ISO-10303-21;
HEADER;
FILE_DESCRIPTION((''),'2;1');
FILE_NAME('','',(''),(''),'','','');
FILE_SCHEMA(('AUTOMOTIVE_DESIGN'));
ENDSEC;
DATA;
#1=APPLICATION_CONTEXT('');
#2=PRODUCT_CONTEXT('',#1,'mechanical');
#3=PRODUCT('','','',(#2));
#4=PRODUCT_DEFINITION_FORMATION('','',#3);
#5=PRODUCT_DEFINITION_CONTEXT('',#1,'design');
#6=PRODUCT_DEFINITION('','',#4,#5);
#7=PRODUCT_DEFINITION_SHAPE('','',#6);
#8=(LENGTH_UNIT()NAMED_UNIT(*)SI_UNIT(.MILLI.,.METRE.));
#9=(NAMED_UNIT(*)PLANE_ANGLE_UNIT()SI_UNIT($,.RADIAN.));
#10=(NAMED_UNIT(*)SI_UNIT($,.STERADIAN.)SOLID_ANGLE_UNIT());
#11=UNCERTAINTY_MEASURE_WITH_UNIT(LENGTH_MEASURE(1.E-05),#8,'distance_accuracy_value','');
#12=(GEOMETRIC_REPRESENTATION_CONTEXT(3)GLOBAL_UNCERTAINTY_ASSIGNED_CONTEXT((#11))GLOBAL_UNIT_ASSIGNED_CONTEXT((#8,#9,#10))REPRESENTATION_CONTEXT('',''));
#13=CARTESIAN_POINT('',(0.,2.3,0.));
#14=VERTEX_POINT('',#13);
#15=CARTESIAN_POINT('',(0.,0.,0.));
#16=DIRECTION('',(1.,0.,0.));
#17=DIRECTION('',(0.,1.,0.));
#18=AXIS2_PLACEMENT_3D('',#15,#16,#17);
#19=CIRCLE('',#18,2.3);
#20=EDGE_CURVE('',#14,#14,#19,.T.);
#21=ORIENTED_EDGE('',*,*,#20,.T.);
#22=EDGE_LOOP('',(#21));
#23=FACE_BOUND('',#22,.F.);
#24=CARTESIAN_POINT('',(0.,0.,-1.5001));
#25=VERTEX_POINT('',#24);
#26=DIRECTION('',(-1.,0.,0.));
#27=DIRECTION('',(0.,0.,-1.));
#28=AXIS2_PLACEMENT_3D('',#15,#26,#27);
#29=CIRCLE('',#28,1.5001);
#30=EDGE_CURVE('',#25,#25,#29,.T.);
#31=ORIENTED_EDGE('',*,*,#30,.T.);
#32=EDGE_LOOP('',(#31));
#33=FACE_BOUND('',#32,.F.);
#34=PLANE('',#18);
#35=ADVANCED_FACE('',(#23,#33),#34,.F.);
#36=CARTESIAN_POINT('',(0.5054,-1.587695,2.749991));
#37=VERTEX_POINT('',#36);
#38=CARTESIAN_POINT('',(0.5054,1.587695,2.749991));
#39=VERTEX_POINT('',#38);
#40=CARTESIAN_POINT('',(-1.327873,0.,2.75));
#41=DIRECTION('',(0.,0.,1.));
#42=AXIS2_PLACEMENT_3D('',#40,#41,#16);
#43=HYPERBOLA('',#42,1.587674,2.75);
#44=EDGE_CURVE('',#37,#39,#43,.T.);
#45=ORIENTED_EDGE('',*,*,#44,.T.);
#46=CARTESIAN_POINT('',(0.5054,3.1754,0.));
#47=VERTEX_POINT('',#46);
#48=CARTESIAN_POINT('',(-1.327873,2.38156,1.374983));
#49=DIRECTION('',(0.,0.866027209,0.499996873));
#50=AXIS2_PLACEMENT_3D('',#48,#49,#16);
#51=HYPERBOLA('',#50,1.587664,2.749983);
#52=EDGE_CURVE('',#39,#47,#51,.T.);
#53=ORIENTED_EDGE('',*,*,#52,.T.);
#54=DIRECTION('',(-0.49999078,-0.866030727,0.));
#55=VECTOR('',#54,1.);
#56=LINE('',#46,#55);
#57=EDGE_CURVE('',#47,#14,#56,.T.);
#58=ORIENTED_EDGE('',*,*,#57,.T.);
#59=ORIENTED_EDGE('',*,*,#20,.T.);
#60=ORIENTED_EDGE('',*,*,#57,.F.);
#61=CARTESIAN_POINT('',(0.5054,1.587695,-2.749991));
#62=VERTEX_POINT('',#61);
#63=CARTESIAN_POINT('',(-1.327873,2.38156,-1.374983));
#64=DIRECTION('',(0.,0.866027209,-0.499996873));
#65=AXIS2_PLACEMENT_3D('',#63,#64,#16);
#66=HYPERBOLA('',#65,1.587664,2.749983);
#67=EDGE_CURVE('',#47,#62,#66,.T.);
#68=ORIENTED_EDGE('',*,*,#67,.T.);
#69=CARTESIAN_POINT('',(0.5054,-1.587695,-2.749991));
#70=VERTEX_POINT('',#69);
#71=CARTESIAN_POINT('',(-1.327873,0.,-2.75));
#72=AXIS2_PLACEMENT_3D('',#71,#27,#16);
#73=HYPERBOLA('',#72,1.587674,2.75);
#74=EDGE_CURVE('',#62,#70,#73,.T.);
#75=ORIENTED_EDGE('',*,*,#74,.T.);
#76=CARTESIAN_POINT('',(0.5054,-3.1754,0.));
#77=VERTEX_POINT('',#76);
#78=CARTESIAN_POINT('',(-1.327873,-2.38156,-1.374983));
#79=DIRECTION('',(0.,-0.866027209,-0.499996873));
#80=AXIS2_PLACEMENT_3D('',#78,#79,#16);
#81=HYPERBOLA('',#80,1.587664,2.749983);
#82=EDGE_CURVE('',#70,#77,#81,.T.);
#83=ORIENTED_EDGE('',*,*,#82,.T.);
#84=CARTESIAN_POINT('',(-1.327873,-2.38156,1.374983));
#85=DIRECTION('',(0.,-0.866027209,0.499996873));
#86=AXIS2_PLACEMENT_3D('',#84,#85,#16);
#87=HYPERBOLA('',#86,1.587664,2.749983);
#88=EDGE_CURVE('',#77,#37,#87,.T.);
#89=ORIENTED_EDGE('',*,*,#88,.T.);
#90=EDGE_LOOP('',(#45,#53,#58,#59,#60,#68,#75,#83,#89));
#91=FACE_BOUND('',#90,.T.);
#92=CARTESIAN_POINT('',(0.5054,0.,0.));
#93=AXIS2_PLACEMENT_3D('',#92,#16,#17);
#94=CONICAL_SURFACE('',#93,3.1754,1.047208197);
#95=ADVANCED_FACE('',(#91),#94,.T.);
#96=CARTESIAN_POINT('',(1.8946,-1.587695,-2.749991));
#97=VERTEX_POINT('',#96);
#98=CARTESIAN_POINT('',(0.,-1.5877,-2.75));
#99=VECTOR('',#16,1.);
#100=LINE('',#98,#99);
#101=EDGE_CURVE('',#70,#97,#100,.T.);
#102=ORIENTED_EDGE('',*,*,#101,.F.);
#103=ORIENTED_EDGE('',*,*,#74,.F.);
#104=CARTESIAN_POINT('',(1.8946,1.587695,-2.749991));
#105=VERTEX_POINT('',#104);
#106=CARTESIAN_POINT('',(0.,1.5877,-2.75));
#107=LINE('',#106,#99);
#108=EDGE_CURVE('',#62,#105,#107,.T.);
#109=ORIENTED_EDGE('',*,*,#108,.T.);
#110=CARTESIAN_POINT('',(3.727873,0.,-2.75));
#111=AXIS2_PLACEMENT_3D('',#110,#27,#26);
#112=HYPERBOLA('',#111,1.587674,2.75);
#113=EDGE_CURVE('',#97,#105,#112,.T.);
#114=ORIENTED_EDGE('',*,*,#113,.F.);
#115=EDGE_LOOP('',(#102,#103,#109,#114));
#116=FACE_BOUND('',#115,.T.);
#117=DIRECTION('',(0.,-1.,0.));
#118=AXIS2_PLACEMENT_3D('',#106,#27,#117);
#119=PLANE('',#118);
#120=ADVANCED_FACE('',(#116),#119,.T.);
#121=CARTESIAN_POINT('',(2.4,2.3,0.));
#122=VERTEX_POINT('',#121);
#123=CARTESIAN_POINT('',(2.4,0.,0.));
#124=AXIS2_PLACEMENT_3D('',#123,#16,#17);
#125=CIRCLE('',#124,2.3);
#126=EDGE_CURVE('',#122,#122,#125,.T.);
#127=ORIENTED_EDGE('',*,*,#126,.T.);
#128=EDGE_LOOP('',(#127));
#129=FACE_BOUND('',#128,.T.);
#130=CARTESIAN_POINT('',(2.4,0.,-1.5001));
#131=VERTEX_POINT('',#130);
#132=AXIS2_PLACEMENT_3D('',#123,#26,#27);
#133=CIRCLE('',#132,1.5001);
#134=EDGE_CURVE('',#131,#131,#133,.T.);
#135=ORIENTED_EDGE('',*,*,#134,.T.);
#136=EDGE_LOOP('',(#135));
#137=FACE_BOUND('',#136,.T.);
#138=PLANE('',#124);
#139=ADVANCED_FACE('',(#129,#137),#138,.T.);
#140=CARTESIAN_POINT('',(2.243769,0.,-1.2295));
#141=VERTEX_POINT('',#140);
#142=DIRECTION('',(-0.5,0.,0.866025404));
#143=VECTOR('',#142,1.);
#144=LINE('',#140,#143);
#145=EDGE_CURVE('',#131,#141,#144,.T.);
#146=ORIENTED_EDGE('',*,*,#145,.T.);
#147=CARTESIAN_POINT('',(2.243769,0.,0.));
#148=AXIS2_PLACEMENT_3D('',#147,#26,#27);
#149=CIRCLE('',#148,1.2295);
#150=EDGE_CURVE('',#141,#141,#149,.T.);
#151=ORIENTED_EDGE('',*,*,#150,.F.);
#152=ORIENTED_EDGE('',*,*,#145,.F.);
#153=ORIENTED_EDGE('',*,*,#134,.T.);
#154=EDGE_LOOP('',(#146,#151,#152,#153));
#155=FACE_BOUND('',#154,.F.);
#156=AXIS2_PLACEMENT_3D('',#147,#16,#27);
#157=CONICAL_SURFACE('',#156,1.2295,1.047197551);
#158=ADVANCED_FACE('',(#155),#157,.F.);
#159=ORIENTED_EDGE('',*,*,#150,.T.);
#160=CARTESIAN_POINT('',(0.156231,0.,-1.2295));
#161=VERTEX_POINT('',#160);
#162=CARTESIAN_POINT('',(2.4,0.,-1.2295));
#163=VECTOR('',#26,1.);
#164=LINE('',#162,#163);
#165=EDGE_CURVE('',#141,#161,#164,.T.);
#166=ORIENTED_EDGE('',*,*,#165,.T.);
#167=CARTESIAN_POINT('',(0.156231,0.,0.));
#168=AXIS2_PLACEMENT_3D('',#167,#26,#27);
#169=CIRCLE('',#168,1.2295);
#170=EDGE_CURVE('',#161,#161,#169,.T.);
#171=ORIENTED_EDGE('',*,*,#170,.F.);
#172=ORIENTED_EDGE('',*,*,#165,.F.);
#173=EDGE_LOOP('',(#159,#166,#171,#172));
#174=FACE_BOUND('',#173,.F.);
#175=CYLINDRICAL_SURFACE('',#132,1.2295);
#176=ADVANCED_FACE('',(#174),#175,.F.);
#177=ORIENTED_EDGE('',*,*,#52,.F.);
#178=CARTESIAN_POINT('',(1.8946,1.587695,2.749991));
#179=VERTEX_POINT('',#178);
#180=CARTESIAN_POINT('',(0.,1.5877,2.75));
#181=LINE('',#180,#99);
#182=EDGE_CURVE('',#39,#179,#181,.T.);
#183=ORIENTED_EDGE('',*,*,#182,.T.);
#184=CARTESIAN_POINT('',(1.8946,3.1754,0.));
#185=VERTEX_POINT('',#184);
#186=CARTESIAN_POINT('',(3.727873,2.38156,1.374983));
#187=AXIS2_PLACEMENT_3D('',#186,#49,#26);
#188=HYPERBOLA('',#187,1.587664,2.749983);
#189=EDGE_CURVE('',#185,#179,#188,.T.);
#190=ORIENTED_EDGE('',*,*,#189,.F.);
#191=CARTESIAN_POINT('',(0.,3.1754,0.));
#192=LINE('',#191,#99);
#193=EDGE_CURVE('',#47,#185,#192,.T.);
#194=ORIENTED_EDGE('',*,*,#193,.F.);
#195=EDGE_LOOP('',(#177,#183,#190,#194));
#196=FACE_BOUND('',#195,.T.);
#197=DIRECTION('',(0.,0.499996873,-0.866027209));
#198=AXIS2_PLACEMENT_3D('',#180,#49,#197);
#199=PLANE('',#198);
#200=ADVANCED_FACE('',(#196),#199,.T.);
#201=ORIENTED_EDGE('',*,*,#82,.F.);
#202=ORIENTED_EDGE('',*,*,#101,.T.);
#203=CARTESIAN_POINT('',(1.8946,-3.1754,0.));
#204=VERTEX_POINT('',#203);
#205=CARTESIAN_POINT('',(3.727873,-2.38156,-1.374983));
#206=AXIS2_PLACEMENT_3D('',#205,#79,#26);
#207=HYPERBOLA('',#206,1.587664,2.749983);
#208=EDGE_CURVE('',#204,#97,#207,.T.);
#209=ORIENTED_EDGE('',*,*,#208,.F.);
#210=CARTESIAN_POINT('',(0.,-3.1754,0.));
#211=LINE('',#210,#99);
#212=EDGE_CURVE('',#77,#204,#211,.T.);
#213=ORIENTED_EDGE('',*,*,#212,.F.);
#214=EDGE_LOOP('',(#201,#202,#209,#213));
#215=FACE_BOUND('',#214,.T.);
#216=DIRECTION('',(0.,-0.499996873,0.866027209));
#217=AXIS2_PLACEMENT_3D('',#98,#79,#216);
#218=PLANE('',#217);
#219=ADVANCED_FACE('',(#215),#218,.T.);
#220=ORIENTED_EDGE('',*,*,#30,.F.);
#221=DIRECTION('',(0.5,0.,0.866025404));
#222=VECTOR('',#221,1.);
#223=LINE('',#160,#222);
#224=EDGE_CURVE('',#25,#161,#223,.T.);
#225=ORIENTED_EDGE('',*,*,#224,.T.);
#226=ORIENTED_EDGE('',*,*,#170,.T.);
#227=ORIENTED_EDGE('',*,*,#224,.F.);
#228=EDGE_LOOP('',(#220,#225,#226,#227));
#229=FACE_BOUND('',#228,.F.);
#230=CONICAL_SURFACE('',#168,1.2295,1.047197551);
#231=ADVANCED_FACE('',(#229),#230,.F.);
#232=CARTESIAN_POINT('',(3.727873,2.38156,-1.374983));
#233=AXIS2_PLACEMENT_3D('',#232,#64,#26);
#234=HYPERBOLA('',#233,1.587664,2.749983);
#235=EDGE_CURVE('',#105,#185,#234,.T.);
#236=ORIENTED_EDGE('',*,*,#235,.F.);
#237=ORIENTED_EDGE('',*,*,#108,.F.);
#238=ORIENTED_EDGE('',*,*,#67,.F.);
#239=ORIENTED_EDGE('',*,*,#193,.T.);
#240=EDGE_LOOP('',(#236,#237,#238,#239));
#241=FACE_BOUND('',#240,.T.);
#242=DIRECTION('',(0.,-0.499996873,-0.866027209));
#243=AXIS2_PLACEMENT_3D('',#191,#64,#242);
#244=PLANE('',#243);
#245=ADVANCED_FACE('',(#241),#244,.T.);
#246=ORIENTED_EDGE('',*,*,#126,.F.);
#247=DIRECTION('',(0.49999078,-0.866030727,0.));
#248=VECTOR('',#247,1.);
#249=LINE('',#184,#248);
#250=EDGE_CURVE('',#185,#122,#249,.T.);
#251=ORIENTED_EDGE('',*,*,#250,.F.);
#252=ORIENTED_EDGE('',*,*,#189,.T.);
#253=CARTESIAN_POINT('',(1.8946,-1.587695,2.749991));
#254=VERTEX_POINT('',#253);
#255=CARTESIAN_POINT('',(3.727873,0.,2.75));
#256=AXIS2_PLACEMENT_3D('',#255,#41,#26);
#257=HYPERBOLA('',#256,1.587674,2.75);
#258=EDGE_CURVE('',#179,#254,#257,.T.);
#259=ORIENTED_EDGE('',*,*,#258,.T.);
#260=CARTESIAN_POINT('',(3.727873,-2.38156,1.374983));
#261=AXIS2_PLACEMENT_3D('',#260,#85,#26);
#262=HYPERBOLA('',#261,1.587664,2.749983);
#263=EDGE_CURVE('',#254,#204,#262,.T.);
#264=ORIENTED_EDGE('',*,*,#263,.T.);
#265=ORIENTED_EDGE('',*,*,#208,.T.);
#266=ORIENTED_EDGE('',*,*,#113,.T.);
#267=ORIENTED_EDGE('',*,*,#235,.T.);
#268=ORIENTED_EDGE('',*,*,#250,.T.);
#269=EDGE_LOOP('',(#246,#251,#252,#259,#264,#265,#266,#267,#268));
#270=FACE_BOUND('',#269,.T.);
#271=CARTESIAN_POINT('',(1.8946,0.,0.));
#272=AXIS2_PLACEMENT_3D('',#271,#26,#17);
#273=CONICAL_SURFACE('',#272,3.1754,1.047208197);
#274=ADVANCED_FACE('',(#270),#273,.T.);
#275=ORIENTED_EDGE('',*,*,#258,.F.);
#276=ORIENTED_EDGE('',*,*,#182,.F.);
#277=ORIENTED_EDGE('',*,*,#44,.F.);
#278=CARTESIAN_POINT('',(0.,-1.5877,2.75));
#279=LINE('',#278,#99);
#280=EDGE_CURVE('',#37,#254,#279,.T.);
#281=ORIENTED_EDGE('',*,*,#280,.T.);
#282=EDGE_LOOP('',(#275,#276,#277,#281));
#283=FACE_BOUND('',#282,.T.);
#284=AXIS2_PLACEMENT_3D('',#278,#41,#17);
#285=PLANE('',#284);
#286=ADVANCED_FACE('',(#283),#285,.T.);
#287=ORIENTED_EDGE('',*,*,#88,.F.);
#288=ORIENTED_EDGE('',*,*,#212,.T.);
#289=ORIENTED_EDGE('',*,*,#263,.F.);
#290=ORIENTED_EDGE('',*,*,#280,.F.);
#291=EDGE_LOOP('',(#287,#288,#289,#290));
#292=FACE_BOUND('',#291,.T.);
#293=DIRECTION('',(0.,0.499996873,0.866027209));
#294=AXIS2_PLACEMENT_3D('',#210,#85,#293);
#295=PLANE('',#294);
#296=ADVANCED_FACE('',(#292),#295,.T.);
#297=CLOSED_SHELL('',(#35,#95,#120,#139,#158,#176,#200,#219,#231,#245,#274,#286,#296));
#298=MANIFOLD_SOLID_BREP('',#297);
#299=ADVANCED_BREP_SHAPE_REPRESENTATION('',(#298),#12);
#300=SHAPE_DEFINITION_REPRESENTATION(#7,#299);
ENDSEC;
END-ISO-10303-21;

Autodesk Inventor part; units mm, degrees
ref_plane "YZ Plane" through (0, 0, 0) normal (1, 0, 0) x (0, 1, 0)
ref_plane "XZ Plane" through (0, 0, 0) normal (0, 1, 0) x (-1, 0, 0)
sketch "Szkic1" plane through (0, 0, 0) normal (1, 0, 0) x (0, 1, 0)
  line L0 (-3.1754, 0) -> (-1.5877, 2.75)
  line L1 (-1.5877, 2.75) -> (1.5877, 2.75)
  line L2 (1.5877, 2.75) -> (3.1754, 0)
  line L3 (3.1754, 0) -> (1.5877, -2.75)
  line L4 (1.5877, -2.75) -> (-1.5877, -2.75)
  line L5 (-1.5877, -2.75) -> (-3.1754, 0)
  point P0 (0, 0)
  point P1 (0, 0)
  dimension "d0" = 6.3509
extrude "Bryła" add sketch "Szkic1" along normal blind 2.4
sketch "Szkic2" plane through (0, 0, 0) normal (0, 0, 1) x (1, 0, 0)
  line L0 (0, 1.5877) -> (0, 3.1754) projected
  line L1 (0, 3.1754) -> (2.4, 3.1754) projected
  line L2 (2.4, 1.5877) -> (2.4, 3.1754) projected
  line L3 (-0.48, 0) -> (2.88, 0) projected
  line L4 (0.5054, 3.1754) -> (0, 2.3)
  line L5 (1.8946, 3.1754) -> (2.4, 2.3)
  dimension "d3" = 30
  dimension "d4" = 30
  dimension "d5" = 4.6
  dimension "d6" = 4.6
revolve "Faza1" cut sketch "Szkic2" angle 360 about axis through (-10, 0, 0) along (1, 0, 0)
sketch "Szkic3" plane through (2.4, 0, 0) normal (1, 0, 0) x (0, 0, -1)
  arc A0 (-0.625, -1.0825) -> (0.625, -1.0825) centre (0, 0) ccw projected
hole "Gwint" at (2.4, 0, 0) direction (-1, 0, 0) diameter 2.459 end through all thread size "M3x0.5" class "6H" standard "ISO Metric profile"
chamfer "Faza2" distance 0.2706 angle 30 1 edges at (2.4, 0, 1.2295) measured on face at (2.4, 1.9179, -0.2329)
chamfer "Faza3" distance 0.2706 angle 30 1 edges at (0, 0, 1.2295) measured on face at (0, 1.9179, -0.2329)
ref_plane "Work Plane1" through (-6.3375, 0, 0) normal (0, -0.8660254, -0.5) x (1, 0, 0)
equation "\"d0\" = 1.1547 * SW"
equation "\"d1\" = KOH"
equation "\"d3\" = ANG1"
equation "\"d4\" = ANG2"
equation "\"d5\" = SW0"
equation "\"d6\" = SW01"
equation "\"d8\" = -0.5 * GD1 + 0.5 * NND"
equation "\"d40\" = -0.5 * GD1 + 0.5 * NND"
equation "\"d10\" = -0.5 * GD1 + 0.5 * NND"
equation "\"d41\" = -0.5 * GD1 + 0.5 * NND"
equation "\"ANG1\" = 30deg"
equation "\"ANG2\" = 30deg"
equation "\"NND\" = 3"
equation "\"KOH\" = 2.4"
equation "\"SW\" = 5.5"
equation "\"SW0\" = 4.6"
equation "\"SW01\" = SW0"
equation "\"GUL\" = 0.541266 * PTC"
equation "\"THREADDIA\" = 3"
equation "\"TOA\" = 30deg"
equation "\"PTC\" = 0.5"
equation "\"E0\" = 1.155 * SW"
equation "\"GAL\" = 0.541266 * PTC"
equation "\"GD1\" = 2.458734"
properties part number "ISO 4032 - M3" material "Stal nierdzewna 440C"
